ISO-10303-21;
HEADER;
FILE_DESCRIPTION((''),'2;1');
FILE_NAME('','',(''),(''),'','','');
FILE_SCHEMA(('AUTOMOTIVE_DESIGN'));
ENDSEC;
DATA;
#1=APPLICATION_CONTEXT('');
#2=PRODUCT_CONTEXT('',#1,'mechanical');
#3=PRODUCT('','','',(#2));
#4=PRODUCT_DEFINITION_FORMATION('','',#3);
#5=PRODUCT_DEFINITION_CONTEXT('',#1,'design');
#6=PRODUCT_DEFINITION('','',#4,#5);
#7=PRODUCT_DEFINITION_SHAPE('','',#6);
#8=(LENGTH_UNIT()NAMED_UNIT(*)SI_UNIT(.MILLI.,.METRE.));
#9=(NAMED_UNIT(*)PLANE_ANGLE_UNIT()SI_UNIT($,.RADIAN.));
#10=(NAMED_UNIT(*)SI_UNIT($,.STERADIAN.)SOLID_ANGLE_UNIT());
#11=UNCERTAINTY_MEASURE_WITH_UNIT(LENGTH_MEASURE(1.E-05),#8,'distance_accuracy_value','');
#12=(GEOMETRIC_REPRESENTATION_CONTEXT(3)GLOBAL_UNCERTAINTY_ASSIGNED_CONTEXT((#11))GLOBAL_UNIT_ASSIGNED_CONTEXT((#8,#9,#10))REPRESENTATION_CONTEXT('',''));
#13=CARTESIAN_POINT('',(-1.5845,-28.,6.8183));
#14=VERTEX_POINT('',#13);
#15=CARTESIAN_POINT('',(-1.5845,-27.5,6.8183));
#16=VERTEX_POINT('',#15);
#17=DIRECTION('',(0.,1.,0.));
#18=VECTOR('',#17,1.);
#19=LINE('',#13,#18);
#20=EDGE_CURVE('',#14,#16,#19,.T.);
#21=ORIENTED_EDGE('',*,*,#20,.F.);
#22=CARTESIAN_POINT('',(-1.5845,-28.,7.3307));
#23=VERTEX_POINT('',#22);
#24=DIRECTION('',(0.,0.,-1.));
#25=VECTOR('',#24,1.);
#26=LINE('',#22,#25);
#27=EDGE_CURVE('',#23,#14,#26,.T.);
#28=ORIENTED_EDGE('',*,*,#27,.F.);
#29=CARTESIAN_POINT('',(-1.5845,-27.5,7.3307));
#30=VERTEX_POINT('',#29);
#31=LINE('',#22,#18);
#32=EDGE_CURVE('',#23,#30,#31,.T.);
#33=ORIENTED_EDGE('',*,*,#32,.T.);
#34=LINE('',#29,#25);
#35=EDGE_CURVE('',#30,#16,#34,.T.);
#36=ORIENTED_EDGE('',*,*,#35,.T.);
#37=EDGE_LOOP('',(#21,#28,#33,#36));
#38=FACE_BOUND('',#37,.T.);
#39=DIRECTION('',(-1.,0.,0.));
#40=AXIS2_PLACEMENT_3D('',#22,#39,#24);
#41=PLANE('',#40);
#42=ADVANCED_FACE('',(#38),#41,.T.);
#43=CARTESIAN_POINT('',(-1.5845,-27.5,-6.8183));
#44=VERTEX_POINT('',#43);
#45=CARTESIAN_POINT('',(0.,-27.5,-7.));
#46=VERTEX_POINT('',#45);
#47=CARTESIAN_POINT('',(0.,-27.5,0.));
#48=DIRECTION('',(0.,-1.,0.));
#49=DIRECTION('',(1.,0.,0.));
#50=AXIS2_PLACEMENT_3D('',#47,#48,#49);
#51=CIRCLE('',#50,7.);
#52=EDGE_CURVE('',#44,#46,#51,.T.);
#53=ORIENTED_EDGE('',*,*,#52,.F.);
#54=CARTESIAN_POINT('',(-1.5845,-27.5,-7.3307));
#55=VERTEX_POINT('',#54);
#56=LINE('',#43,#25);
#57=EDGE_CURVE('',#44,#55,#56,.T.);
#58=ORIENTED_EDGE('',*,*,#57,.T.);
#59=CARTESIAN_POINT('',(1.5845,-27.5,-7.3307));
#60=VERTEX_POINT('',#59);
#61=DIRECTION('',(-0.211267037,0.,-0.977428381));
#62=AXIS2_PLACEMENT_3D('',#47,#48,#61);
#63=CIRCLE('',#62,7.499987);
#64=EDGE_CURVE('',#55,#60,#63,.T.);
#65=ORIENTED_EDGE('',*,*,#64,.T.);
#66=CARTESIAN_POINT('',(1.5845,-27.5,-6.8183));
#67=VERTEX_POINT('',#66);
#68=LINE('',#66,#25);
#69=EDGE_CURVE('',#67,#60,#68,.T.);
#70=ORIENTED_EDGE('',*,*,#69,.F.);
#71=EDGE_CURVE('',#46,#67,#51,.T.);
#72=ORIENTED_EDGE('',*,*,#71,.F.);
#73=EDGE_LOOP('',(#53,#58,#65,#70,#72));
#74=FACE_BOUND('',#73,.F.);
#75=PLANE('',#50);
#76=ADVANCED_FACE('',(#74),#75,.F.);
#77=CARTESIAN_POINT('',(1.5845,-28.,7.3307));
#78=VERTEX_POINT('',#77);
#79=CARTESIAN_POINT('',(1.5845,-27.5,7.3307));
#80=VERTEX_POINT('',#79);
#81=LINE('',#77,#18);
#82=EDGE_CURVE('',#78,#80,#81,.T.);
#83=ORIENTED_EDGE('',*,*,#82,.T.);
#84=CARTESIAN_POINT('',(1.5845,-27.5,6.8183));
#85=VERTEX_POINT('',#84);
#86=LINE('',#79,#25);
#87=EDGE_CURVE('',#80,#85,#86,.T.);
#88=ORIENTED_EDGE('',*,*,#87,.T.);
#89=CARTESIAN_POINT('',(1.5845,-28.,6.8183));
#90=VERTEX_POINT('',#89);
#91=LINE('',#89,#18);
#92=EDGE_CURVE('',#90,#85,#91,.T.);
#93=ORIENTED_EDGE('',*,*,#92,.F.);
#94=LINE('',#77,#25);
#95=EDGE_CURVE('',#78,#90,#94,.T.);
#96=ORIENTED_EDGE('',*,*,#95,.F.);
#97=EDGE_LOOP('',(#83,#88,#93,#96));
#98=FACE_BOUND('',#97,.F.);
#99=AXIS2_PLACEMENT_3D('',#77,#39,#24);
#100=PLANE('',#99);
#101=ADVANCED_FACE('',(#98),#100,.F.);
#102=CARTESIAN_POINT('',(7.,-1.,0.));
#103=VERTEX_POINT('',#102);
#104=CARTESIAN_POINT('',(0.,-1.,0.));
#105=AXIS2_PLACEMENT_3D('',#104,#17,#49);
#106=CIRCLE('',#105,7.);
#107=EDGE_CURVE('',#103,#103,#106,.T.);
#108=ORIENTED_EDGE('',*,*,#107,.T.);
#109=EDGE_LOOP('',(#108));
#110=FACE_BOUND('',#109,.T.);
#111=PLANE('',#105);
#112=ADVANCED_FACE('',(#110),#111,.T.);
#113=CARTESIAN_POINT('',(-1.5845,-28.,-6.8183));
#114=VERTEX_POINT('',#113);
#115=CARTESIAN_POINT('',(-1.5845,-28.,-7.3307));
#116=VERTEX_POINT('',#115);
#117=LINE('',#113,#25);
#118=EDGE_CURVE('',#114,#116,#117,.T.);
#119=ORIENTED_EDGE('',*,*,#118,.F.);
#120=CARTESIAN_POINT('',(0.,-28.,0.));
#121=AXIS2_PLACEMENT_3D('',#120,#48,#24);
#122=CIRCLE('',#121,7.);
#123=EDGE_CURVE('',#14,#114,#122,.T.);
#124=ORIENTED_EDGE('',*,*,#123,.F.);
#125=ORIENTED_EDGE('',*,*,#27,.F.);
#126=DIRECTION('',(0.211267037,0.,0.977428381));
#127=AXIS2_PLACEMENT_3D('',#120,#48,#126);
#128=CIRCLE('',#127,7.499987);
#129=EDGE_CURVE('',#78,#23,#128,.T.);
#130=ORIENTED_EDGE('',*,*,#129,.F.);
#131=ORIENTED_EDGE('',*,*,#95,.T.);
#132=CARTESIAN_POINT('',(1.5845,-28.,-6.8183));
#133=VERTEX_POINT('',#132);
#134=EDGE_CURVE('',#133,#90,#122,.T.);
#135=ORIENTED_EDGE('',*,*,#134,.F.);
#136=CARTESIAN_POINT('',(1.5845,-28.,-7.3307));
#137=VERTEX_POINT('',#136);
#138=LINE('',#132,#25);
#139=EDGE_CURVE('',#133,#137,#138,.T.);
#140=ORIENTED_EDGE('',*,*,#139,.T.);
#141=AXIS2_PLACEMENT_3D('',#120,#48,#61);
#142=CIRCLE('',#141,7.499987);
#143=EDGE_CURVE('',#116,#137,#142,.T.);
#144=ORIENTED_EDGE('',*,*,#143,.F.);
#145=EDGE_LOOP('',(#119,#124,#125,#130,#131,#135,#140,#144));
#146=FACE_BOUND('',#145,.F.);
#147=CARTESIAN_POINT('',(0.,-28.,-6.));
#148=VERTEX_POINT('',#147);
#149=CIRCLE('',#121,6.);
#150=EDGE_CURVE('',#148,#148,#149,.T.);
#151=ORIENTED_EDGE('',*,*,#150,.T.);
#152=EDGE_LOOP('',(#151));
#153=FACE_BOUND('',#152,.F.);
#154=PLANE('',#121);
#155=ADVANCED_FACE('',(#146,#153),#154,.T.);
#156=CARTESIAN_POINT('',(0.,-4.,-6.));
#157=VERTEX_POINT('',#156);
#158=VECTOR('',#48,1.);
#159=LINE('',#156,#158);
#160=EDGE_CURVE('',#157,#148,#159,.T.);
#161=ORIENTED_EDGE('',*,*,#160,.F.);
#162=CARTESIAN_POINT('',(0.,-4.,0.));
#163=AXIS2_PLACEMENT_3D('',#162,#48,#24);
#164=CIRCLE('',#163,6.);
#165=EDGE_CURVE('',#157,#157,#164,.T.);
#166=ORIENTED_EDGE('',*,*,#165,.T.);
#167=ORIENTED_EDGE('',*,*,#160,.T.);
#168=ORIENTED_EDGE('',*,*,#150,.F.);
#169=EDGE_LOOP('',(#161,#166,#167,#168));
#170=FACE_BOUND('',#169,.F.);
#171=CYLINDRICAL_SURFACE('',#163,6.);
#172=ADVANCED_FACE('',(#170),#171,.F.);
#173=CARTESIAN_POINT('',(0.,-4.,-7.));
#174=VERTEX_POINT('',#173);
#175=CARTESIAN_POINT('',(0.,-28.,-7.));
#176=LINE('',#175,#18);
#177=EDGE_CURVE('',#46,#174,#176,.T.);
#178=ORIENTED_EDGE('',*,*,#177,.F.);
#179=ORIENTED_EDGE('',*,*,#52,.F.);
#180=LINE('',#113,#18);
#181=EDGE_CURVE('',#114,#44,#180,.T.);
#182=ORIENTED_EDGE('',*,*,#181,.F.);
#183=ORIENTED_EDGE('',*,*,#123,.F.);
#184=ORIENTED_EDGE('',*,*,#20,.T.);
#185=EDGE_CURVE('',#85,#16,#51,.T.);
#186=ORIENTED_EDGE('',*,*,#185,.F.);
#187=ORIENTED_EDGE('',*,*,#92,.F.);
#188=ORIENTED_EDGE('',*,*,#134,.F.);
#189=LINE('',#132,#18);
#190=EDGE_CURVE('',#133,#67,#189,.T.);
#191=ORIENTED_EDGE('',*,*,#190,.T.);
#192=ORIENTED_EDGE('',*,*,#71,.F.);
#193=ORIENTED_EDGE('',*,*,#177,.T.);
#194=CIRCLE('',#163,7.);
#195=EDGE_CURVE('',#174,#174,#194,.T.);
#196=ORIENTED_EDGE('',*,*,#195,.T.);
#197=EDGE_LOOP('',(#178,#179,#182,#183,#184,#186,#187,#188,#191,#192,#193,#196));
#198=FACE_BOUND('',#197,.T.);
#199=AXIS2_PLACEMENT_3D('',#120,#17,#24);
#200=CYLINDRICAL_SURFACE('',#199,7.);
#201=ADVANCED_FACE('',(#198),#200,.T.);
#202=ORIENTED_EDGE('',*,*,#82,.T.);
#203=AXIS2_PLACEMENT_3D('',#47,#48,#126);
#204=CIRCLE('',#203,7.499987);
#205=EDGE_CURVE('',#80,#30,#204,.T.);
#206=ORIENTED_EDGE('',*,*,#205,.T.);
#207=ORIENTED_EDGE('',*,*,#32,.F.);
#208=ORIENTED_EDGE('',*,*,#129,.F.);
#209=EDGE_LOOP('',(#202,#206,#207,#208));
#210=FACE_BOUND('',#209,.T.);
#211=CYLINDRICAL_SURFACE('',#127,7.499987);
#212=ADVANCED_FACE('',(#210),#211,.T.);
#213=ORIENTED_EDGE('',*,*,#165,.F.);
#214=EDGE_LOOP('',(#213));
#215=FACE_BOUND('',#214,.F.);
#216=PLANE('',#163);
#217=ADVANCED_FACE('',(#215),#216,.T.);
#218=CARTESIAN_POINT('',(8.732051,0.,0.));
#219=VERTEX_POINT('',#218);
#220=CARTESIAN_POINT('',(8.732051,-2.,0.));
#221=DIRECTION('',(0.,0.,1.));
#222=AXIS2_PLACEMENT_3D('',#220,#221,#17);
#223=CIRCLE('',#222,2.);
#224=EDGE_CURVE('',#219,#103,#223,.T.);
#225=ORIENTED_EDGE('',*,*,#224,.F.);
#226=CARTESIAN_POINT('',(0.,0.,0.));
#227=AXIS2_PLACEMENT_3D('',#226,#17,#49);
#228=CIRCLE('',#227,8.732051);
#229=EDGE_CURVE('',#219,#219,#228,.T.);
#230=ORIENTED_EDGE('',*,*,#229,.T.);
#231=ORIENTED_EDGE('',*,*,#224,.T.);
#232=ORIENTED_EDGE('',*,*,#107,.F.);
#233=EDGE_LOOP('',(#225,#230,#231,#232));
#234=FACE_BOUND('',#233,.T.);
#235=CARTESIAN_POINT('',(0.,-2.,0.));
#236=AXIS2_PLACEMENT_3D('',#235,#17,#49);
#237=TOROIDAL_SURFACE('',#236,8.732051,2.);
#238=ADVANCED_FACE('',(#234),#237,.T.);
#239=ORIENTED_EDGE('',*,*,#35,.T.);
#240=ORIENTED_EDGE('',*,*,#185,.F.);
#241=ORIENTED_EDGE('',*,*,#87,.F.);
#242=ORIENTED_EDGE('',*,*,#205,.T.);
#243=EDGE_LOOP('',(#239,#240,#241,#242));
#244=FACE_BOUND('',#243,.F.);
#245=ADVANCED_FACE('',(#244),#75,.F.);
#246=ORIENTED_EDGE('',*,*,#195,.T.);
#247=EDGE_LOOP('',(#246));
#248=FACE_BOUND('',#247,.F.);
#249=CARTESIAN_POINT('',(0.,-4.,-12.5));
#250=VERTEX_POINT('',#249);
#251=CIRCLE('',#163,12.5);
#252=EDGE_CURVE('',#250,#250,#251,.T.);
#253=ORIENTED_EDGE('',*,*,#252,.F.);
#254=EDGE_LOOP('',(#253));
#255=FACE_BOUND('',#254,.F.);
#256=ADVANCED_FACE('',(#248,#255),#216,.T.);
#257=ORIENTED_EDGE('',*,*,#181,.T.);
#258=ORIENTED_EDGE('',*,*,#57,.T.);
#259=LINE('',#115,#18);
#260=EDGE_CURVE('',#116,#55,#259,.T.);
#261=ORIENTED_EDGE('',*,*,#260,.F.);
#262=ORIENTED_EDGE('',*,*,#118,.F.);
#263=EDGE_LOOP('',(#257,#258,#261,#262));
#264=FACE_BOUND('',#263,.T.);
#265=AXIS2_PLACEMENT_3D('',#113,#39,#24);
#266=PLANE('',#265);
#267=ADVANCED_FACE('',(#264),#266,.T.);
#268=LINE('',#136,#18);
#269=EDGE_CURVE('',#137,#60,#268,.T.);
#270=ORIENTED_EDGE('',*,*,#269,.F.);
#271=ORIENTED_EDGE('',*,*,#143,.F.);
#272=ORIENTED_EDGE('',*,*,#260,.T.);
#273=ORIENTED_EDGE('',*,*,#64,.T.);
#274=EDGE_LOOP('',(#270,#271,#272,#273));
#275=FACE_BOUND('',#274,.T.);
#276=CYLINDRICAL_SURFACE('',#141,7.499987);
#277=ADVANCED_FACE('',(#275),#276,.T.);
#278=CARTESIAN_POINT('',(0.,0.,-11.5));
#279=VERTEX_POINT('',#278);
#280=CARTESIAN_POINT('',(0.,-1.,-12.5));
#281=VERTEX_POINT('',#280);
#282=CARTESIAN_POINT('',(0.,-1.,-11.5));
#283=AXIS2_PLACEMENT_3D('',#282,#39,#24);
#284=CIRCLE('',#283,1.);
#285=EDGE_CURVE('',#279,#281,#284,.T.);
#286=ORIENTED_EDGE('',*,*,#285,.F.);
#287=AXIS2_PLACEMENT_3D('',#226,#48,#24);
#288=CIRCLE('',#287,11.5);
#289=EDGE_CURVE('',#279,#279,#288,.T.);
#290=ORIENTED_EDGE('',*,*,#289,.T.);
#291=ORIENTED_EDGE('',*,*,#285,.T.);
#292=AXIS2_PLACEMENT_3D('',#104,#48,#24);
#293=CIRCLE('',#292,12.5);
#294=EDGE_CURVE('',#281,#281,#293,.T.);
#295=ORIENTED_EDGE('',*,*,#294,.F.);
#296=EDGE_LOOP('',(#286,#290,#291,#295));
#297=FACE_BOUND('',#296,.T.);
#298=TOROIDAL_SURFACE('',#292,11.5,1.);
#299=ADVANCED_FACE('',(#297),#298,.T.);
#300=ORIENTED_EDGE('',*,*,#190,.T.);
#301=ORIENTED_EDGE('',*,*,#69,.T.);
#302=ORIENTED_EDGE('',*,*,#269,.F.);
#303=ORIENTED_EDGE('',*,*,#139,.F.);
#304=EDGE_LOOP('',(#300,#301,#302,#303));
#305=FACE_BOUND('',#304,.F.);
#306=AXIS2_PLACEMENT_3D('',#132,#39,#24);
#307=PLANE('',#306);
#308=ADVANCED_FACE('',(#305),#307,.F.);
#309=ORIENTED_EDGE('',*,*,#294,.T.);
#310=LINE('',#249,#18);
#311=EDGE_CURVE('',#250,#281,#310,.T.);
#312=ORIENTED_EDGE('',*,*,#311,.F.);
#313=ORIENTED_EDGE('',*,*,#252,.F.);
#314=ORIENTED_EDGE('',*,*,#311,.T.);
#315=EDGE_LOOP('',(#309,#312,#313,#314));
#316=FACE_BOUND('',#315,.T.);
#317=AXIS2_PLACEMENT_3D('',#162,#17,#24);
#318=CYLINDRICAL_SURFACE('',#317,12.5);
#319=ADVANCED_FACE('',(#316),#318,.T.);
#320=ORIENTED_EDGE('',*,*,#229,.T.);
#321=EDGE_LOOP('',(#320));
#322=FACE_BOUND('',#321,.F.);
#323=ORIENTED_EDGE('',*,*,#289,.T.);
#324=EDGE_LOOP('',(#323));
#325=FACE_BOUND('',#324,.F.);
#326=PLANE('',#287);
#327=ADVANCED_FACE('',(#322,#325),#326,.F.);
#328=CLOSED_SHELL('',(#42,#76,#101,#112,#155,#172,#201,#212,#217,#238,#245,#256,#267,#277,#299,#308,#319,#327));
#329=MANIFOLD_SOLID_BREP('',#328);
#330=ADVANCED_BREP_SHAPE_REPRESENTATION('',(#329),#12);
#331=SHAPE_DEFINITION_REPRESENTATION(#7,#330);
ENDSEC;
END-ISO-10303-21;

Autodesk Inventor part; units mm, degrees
ref_plane "YZ Plane" through (0, 0, 0) normal (1, 0, 0) x (0, 1, 0)
ref_plane "XZ Plane" through (0, 0, 0) normal (0, 1, 0) x (-1, 0, 0)
ref_plane "XY Plane" through (0, 0, 0) normal (0, 0, 1) x (1, 0, 0)
sketch "Sketch2" plane through (0, 0, 0) normal (1, 0, 0) x (0, 1, 0)
  line L0 (0, 0) -> (-4, 0)
  line L1 (-4, 0) -> (-4, -12.5)
  line L2 (-4, -12.5) -> (0, -12.5)
  line L3 (0, -12.5) -> (0, 0)
  line L4 (12.3022, 0) -> (-32.9738, 0) construction
  line L5 (-4, 0) -> (-28, 0)
  line L6 (-28, 0) -> (-28, -7)
  line L7 (-28, -7) -> (-4, -7)
  line L8 (-4, -7) -> (-4, 0)
  line L9 (-4, -6) -> (-28, -6)
  point P0 (-4, -7)
  dimension "d0" = 4
  dimension "d2" = 25
  dimension "d3" = 28
  dimension "d4" = 1
  dimension "d5" = 14
revolve "Revolution1" add sketch "Sketch2" angle 360 about axis through (0, 12.3022, 0) along (0, -1, 0) contours L3 L2 L1 L0 | L1 L7 L6 L9
sketch "Sketch3" plane through (0, 0, 0) normal (0, 1, 0) x (1, 0, 0)
  circle A0 centre (0, 0) radius 7
  dimension "d7" = 14
extrude "Extrusion1" cut sketch "Sketch3" against normal blind 1
fillet "Fillet1" radius 2 1 edges at (-7, 0, 0)
fillet "Fillet2" radius 1 1 edges at (0, 0, 12.5)
sketch "Sketch4" plane through (0, -28, 0) normal (0, -1, 0) x (1, 0, 0)
  circle A0 centre (0, 0) radius 7 projected
  circle A1 centre (0, 0) radius 7 projected
  line L0 (1.5845, 7.3307) -> (1.5845, 6.8183)
  line L1 (1.5845, -6.8183) -> (1.5845, -7.3307)
  line L2 (-1.5845, 7.3307) -> (-1.5845, 6.8183)
  line L3 (-1.5845, -6.8183) -> (-1.5845, -7.3307)
  circle A2 centre (0, 0) radius 11.5 projected
  arc A3 (1.5845, 7.3307) -> (-1.5845, 7.3307) centre (0, 0) ccw
  arc A4 (-1.5845, -7.3307) -> (1.5845, -7.3307) centre (0, 0) ccw
  dimension "d13" = 1.5845
  dimension "d14" = 1.5845
  dimension "d15" = 1.5845
  dimension "d16" = 1.5845
extrude "Extrusion2" add sketch "Sketch4" against normal blind 0.5 contours A0 L2 A3 L0 | L1 A4 L3 A0
properties part number "BOTÃO"
